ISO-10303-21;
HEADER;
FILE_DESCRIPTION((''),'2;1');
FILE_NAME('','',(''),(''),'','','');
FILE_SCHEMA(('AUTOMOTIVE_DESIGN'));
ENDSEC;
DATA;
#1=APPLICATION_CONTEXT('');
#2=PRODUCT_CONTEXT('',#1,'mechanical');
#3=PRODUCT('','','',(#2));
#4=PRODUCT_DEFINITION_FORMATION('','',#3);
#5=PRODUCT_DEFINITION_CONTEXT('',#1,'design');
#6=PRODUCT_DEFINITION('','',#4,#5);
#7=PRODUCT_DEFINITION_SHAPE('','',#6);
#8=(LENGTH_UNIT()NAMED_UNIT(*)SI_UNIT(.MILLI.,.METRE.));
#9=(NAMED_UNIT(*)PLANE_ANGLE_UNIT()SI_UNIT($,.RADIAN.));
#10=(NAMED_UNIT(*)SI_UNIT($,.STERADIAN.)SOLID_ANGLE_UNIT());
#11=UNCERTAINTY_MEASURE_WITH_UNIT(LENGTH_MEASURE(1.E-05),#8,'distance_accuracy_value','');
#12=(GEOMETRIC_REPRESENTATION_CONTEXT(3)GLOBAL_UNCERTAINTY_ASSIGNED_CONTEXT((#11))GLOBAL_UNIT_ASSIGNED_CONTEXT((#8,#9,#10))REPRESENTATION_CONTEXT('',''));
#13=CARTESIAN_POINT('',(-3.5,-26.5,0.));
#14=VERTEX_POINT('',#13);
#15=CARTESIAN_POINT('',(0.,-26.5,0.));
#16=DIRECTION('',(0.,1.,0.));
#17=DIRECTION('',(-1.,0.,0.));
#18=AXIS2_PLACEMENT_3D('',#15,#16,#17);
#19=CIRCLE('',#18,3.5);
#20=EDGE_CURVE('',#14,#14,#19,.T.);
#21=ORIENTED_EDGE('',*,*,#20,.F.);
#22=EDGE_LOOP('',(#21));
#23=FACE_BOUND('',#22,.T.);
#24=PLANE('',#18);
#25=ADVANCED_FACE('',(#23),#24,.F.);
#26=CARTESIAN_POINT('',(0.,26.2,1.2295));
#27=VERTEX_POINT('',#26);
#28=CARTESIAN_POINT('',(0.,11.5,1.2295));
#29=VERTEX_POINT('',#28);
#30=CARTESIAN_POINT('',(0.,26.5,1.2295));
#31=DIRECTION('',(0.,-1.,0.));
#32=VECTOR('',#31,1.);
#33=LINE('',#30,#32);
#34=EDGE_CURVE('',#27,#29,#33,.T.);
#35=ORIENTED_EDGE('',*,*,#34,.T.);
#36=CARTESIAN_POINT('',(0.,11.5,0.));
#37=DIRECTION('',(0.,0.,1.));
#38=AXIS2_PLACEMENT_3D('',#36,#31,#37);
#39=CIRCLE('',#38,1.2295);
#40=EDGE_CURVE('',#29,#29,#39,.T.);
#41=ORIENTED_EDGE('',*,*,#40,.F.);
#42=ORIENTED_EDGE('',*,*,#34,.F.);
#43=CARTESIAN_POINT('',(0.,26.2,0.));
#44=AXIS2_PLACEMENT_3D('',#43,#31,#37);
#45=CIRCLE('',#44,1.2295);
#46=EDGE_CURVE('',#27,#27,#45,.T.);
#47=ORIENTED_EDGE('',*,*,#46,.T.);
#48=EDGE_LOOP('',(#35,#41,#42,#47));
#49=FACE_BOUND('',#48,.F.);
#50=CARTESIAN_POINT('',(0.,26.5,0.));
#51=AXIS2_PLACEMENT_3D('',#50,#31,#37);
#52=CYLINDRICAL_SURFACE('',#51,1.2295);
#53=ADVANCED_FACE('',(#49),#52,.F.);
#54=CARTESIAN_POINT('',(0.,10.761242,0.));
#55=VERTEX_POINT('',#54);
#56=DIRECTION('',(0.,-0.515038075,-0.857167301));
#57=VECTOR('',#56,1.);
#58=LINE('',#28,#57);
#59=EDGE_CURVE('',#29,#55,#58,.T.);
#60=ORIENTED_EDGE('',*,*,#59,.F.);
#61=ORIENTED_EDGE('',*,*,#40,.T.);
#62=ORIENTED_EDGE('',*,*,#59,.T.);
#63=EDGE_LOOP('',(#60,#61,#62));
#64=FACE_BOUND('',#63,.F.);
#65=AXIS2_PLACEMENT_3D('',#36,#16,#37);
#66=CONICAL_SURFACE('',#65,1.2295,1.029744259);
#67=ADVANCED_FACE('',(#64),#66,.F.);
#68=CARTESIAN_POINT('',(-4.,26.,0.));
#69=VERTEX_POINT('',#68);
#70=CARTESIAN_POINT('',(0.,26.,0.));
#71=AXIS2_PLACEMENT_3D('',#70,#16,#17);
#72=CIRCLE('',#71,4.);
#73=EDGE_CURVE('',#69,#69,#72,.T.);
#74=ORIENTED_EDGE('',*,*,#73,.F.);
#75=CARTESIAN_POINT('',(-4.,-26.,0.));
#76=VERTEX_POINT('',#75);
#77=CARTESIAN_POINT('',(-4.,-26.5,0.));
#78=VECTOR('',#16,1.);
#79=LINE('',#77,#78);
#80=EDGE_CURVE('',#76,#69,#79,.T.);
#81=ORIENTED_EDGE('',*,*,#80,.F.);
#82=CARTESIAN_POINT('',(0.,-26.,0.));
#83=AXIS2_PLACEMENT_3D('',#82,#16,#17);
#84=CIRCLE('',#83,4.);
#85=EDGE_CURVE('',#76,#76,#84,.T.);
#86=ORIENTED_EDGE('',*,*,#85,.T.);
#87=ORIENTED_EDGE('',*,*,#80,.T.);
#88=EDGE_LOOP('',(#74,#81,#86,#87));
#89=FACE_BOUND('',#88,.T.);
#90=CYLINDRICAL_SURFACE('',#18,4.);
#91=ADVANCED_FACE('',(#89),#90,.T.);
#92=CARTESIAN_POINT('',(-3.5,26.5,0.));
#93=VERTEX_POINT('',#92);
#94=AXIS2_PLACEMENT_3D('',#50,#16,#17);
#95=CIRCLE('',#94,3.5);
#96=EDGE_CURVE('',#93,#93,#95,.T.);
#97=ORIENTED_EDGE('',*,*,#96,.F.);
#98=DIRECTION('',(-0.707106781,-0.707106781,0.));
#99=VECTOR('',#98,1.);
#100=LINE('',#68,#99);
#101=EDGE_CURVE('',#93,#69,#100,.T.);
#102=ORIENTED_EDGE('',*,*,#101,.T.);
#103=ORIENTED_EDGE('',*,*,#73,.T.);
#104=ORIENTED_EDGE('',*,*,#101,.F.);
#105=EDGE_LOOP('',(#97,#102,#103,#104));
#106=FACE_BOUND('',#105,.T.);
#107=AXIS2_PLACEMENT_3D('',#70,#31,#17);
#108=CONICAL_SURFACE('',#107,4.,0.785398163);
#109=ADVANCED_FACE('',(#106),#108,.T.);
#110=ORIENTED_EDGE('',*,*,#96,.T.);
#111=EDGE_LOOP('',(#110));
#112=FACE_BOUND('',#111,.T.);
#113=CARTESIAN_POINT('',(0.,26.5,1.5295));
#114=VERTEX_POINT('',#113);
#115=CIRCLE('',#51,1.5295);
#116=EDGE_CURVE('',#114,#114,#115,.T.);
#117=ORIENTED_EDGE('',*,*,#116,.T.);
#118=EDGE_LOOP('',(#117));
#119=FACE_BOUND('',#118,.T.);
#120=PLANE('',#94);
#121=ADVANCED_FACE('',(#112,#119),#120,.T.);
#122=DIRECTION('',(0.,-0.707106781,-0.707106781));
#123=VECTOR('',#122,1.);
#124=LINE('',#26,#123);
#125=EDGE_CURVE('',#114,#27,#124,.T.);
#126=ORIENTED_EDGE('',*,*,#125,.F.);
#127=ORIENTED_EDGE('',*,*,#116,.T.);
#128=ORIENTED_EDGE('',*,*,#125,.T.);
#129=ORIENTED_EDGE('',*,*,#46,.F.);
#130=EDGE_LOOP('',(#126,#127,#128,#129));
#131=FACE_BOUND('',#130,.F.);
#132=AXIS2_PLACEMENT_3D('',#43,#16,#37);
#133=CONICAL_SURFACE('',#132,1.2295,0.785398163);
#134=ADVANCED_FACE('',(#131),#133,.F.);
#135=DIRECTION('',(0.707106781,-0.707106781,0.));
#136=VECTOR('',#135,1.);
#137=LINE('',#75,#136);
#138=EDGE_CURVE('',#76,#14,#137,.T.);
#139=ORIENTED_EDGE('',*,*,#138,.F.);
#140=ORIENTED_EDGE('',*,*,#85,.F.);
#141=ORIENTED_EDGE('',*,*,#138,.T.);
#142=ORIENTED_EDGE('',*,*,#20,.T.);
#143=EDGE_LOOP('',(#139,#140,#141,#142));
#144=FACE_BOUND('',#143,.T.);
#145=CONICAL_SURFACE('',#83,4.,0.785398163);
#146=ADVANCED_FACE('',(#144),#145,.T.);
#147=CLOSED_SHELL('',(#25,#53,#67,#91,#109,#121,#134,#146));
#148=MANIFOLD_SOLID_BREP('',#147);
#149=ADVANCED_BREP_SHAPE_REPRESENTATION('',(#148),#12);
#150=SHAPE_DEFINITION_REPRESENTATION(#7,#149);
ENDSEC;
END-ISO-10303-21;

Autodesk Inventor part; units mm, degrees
ref_plane "YZ Plane" through (0, 0, 0) normal (1, 0, 0) x (0, 1, 0)
ref_plane "XZ Plane" through (0, 0, 0) normal (0, 1, 0) x (-1, 0, 0)
ref_plane "XY Plane" through (0, 0, 0) normal (0, 0, 1) x (1, 0, 0)
sketch "Sketch1" plane through (0, 0, 0) normal (0, 0, 1) x (1, 0, 0)
  line L0 (-4.8, 0) -> (0.8, 0) construction
  line L1 (0, -37.1) -> (0, 37.1) construction
  line L2 (-4, 26.5) -> (0, 26.5)
  line L3 (0, 26.5) -> (0, -26.5)
  line L4 (0, -26.5) -> (-4, -26.5)
  line L5 (-4, -26.5) -> (-4, 26.5)
  point P0 (0, 0)
  dimension "d1" = 53
  dimension "d16" = 8
revolve "Revolution1" add sketch "Sketch1" angle 360 about axis through (0, -10, 0) along (0, 1, 0)
sketch "Sketch2" plane through (0, 26.5, 0) normal (0, 1, 0) x (1, 0, 0)
  circle A0 centre (0, 0) radius 4 projected
hole "Hole1" at (0, 26.5, 0) direction (0, -1, 0) diameter 2.459 depth 15 tip angle 118 thread size "M3x0.5" class "6H" standard "ISO Metric profile"
mirror "Espelhar1" [suppressed]
chamfer "Chamfer1" distance 0.5 angle 45 2 edges at (4, -26.5, 0) (4, 26.5, 0)
chamfer "Chamfer2" distance 0.3 angle 45 1 edges at (0, 26.5, -1.2295)
properties part number "GRJ-05-104" material "Poliacetal WT"
